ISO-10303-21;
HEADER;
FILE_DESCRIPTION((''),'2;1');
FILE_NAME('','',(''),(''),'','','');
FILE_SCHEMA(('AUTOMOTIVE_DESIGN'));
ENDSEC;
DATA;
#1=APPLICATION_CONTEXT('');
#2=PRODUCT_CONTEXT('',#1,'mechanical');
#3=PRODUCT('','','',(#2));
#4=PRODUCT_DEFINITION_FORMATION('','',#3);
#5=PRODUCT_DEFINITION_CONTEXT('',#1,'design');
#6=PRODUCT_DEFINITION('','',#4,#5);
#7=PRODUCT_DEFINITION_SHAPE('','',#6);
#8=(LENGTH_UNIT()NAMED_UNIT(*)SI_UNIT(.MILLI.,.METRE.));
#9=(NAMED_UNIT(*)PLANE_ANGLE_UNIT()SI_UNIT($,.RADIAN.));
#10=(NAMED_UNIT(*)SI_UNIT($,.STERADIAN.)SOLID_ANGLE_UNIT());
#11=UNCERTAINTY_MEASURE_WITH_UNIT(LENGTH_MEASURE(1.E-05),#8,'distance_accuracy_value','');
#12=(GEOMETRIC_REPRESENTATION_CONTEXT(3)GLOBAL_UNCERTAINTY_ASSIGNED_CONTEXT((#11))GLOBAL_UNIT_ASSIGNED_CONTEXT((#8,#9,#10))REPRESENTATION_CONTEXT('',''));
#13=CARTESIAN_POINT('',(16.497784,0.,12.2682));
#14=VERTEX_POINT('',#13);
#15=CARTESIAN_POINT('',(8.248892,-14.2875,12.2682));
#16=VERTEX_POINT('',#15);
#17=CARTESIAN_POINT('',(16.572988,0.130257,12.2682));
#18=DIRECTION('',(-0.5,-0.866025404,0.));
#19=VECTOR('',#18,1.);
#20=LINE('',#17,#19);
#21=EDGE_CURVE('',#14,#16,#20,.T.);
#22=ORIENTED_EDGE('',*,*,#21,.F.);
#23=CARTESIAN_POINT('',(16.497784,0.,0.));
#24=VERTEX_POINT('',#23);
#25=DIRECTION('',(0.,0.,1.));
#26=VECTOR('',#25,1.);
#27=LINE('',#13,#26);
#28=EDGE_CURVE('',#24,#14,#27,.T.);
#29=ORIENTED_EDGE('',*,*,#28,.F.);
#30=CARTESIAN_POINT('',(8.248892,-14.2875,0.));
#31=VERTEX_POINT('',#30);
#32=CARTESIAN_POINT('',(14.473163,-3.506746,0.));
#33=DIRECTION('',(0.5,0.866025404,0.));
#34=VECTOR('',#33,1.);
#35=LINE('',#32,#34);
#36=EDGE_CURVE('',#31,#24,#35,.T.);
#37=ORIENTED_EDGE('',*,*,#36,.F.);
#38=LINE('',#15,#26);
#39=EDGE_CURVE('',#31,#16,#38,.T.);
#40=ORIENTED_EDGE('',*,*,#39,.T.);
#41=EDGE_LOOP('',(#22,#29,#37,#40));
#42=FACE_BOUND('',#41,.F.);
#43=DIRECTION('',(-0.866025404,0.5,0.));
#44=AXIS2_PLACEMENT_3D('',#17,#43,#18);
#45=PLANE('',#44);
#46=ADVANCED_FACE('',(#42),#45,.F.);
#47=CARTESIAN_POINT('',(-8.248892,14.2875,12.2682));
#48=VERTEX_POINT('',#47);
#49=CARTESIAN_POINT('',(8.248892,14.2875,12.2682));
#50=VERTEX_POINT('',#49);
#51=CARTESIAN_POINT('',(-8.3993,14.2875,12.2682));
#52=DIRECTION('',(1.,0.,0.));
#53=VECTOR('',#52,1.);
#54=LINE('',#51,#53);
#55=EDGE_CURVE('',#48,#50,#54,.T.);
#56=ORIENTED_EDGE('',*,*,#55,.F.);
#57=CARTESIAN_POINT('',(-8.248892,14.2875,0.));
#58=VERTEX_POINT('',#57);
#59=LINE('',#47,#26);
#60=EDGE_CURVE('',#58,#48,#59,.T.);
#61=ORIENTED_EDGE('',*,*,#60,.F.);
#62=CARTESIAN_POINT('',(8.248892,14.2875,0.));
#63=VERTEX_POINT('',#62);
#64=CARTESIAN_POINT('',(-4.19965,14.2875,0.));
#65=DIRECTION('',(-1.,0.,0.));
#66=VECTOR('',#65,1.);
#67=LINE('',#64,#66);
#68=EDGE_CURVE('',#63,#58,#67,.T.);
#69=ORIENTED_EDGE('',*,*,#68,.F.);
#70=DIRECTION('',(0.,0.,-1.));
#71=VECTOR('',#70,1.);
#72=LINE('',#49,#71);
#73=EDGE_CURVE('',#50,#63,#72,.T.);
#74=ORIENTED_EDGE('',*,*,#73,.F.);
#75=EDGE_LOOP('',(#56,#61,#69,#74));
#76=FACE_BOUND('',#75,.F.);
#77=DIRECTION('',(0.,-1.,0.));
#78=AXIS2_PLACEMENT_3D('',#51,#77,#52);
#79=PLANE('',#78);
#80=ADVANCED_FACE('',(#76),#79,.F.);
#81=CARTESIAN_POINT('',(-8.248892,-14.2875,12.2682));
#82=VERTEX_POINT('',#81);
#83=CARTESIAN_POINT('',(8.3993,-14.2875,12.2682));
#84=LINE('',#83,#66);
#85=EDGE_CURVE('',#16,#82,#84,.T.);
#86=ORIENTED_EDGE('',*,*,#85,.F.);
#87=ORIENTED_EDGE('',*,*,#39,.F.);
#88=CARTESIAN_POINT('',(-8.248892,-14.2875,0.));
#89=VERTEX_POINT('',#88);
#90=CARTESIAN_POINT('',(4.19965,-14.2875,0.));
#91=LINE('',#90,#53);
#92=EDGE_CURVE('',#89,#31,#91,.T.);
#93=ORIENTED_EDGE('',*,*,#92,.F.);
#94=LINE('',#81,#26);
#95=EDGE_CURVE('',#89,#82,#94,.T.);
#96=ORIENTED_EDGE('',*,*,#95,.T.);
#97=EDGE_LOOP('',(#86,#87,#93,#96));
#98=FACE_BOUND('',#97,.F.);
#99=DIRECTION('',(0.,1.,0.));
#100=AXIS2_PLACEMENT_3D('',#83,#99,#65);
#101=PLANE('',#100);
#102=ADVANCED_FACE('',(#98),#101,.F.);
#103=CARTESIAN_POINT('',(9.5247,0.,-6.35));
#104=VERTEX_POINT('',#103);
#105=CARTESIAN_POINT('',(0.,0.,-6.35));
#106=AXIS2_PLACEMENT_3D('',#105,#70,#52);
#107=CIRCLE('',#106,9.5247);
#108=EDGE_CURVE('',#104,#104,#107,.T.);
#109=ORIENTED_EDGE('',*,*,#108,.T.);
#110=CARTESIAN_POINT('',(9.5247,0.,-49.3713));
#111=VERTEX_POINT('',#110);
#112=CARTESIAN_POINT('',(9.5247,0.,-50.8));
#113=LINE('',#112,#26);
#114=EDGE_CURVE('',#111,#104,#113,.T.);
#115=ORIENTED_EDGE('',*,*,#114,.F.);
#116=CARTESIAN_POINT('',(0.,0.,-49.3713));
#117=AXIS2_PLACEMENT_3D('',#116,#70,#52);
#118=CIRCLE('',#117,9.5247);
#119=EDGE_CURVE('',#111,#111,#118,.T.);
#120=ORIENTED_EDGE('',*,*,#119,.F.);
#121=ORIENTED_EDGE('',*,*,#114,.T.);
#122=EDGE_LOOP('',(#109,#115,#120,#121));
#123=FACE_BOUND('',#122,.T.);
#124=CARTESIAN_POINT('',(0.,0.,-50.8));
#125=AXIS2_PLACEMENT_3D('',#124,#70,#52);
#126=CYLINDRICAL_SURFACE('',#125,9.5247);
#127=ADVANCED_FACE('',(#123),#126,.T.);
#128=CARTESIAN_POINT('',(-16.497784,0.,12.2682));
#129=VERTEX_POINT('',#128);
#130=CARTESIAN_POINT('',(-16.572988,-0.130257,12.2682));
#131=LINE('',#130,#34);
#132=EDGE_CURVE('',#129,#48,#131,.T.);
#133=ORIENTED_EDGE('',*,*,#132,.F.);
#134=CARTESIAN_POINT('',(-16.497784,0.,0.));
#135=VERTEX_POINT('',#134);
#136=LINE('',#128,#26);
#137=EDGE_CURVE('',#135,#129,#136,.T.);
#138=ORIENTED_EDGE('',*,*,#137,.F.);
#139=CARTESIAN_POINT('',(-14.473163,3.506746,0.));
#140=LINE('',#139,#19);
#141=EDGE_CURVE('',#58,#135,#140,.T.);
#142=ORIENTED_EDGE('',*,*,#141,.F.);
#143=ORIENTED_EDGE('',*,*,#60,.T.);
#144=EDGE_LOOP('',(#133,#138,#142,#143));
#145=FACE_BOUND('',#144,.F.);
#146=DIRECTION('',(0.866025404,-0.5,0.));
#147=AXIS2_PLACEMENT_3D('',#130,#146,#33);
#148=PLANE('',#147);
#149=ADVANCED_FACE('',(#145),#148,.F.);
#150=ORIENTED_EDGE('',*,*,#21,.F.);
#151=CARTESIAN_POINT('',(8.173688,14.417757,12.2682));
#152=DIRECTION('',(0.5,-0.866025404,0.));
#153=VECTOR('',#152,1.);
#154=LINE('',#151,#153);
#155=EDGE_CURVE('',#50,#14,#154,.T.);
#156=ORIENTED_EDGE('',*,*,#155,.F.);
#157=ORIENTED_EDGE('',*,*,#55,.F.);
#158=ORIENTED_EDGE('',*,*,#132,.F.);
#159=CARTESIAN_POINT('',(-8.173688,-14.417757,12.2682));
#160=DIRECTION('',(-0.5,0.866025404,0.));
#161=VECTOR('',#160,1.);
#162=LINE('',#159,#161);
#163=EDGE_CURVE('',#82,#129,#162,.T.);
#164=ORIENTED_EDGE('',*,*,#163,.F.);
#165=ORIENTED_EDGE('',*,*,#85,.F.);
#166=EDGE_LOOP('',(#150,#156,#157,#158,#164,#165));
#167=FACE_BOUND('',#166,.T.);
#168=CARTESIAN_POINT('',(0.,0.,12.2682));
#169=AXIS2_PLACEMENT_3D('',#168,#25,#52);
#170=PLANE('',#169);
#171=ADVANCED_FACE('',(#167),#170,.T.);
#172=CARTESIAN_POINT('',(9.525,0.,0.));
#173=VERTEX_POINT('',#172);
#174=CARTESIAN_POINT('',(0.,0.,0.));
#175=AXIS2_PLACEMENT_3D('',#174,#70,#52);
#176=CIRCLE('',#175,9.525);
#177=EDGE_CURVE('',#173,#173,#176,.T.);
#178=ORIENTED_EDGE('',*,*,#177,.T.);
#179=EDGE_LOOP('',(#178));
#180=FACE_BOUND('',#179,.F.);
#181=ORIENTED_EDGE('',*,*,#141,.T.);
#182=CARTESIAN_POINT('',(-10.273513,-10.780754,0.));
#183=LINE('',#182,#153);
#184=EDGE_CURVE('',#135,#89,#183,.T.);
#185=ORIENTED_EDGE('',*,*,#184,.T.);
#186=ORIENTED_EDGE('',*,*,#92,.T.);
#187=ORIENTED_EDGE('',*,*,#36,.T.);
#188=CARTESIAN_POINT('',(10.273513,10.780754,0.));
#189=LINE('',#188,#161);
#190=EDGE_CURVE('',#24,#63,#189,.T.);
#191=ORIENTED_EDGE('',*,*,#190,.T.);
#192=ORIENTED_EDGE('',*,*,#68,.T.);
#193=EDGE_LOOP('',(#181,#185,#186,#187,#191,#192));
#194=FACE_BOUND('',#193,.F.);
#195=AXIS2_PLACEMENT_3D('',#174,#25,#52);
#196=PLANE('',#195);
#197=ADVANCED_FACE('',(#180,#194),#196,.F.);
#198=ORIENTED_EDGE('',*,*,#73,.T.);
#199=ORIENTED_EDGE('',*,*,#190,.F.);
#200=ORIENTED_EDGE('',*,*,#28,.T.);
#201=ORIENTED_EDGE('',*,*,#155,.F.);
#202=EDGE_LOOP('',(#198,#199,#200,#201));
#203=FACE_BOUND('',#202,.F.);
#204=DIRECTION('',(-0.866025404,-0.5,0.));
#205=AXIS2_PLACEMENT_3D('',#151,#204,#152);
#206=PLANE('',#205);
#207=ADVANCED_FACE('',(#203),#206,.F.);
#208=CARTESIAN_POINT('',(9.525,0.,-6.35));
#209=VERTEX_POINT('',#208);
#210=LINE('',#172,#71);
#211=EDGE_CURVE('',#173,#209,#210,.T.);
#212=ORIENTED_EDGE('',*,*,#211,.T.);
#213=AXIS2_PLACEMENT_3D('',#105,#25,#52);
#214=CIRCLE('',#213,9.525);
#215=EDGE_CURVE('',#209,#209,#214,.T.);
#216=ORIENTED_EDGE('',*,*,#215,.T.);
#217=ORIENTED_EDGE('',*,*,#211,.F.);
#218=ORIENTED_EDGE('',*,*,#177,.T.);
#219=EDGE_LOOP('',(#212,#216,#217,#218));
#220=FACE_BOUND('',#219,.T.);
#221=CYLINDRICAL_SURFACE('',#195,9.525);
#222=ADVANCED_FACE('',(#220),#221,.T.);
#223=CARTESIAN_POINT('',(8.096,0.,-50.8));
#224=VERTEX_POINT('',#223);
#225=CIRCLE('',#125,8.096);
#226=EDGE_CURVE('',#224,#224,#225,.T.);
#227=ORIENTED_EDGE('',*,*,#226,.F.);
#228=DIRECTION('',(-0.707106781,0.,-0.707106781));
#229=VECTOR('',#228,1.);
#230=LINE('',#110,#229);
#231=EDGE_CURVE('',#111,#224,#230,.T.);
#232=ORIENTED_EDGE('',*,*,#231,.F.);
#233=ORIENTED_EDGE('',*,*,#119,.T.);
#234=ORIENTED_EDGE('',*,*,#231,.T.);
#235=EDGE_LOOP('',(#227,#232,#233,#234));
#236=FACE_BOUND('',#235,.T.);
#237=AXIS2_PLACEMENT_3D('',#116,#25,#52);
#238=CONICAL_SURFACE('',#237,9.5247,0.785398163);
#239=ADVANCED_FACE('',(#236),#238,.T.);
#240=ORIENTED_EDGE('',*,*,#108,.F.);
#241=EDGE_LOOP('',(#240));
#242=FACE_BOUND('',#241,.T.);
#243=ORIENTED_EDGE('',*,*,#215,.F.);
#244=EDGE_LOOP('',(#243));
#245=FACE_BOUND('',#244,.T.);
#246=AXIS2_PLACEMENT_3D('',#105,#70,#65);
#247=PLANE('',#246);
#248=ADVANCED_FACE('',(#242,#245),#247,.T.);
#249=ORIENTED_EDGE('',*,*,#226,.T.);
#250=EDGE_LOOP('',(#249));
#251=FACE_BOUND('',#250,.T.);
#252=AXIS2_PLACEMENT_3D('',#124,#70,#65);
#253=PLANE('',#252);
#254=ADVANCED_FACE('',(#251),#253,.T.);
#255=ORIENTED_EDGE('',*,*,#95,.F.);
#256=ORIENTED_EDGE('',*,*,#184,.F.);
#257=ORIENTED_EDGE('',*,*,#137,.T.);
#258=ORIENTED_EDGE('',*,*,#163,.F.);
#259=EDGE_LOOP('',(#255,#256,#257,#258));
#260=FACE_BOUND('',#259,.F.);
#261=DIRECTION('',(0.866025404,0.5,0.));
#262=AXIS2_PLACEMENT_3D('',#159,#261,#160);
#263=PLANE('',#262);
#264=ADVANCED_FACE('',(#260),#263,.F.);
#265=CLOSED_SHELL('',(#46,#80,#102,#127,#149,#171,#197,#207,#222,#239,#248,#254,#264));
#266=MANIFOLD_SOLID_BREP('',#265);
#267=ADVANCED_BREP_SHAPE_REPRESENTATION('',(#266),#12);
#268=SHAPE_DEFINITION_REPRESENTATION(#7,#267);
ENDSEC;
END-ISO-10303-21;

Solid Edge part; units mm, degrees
sketch "Sketch1" plane through (0, 0, 0) normal (0, 0, 1) x (1, 0, 0)
  circle A0 centre (0, 0) radius 16.5735
  dimension "D1" = 33.147
extrude "Protrusion1" add sketch "Sketch1" along normal blind 12.2682
sketch "Sketch2" plane through (0, 0, 0) normal (0, 0, -1) x (1, 0, 0)
  circle A0 centre (0, 0) radius 9.525
extrude "Protrusion2" add sketch "Sketch2" along normal blind 50.8
sketch "Sketch3" plane through (0, 0, -50.8) normal (0, 0, -1) x (1, 0, 0)
  circle A0 centre (0, 0) radius 9.5247
extrude "Cutout1" cut sketch "Sketch3" against normal blind 44.45 flip side to cut
chamfer "Chamfer_1" distance 1.4287 angle 45 1 edges at (-9.5247, 0, -50.8)
sketch "Sketch4" plane through (0, 0, 12.2682) normal (0, 0, 1) x (1, 0, 0)
  line L0 (-8.3993, 14.2875) -> (8.3993, 14.2875)
  dimension "D1" = 28.575
extrude "Cutout2" cut sketch "Sketch4" against normal up to next material side at (0, 14.3375, 12.2682)
pattern_circular "Pattern1" count 6 over 360 about axis through (0, 0, 12.2682) along (0, 0, 1) of "Cutout2"
properties part number "24103310"
